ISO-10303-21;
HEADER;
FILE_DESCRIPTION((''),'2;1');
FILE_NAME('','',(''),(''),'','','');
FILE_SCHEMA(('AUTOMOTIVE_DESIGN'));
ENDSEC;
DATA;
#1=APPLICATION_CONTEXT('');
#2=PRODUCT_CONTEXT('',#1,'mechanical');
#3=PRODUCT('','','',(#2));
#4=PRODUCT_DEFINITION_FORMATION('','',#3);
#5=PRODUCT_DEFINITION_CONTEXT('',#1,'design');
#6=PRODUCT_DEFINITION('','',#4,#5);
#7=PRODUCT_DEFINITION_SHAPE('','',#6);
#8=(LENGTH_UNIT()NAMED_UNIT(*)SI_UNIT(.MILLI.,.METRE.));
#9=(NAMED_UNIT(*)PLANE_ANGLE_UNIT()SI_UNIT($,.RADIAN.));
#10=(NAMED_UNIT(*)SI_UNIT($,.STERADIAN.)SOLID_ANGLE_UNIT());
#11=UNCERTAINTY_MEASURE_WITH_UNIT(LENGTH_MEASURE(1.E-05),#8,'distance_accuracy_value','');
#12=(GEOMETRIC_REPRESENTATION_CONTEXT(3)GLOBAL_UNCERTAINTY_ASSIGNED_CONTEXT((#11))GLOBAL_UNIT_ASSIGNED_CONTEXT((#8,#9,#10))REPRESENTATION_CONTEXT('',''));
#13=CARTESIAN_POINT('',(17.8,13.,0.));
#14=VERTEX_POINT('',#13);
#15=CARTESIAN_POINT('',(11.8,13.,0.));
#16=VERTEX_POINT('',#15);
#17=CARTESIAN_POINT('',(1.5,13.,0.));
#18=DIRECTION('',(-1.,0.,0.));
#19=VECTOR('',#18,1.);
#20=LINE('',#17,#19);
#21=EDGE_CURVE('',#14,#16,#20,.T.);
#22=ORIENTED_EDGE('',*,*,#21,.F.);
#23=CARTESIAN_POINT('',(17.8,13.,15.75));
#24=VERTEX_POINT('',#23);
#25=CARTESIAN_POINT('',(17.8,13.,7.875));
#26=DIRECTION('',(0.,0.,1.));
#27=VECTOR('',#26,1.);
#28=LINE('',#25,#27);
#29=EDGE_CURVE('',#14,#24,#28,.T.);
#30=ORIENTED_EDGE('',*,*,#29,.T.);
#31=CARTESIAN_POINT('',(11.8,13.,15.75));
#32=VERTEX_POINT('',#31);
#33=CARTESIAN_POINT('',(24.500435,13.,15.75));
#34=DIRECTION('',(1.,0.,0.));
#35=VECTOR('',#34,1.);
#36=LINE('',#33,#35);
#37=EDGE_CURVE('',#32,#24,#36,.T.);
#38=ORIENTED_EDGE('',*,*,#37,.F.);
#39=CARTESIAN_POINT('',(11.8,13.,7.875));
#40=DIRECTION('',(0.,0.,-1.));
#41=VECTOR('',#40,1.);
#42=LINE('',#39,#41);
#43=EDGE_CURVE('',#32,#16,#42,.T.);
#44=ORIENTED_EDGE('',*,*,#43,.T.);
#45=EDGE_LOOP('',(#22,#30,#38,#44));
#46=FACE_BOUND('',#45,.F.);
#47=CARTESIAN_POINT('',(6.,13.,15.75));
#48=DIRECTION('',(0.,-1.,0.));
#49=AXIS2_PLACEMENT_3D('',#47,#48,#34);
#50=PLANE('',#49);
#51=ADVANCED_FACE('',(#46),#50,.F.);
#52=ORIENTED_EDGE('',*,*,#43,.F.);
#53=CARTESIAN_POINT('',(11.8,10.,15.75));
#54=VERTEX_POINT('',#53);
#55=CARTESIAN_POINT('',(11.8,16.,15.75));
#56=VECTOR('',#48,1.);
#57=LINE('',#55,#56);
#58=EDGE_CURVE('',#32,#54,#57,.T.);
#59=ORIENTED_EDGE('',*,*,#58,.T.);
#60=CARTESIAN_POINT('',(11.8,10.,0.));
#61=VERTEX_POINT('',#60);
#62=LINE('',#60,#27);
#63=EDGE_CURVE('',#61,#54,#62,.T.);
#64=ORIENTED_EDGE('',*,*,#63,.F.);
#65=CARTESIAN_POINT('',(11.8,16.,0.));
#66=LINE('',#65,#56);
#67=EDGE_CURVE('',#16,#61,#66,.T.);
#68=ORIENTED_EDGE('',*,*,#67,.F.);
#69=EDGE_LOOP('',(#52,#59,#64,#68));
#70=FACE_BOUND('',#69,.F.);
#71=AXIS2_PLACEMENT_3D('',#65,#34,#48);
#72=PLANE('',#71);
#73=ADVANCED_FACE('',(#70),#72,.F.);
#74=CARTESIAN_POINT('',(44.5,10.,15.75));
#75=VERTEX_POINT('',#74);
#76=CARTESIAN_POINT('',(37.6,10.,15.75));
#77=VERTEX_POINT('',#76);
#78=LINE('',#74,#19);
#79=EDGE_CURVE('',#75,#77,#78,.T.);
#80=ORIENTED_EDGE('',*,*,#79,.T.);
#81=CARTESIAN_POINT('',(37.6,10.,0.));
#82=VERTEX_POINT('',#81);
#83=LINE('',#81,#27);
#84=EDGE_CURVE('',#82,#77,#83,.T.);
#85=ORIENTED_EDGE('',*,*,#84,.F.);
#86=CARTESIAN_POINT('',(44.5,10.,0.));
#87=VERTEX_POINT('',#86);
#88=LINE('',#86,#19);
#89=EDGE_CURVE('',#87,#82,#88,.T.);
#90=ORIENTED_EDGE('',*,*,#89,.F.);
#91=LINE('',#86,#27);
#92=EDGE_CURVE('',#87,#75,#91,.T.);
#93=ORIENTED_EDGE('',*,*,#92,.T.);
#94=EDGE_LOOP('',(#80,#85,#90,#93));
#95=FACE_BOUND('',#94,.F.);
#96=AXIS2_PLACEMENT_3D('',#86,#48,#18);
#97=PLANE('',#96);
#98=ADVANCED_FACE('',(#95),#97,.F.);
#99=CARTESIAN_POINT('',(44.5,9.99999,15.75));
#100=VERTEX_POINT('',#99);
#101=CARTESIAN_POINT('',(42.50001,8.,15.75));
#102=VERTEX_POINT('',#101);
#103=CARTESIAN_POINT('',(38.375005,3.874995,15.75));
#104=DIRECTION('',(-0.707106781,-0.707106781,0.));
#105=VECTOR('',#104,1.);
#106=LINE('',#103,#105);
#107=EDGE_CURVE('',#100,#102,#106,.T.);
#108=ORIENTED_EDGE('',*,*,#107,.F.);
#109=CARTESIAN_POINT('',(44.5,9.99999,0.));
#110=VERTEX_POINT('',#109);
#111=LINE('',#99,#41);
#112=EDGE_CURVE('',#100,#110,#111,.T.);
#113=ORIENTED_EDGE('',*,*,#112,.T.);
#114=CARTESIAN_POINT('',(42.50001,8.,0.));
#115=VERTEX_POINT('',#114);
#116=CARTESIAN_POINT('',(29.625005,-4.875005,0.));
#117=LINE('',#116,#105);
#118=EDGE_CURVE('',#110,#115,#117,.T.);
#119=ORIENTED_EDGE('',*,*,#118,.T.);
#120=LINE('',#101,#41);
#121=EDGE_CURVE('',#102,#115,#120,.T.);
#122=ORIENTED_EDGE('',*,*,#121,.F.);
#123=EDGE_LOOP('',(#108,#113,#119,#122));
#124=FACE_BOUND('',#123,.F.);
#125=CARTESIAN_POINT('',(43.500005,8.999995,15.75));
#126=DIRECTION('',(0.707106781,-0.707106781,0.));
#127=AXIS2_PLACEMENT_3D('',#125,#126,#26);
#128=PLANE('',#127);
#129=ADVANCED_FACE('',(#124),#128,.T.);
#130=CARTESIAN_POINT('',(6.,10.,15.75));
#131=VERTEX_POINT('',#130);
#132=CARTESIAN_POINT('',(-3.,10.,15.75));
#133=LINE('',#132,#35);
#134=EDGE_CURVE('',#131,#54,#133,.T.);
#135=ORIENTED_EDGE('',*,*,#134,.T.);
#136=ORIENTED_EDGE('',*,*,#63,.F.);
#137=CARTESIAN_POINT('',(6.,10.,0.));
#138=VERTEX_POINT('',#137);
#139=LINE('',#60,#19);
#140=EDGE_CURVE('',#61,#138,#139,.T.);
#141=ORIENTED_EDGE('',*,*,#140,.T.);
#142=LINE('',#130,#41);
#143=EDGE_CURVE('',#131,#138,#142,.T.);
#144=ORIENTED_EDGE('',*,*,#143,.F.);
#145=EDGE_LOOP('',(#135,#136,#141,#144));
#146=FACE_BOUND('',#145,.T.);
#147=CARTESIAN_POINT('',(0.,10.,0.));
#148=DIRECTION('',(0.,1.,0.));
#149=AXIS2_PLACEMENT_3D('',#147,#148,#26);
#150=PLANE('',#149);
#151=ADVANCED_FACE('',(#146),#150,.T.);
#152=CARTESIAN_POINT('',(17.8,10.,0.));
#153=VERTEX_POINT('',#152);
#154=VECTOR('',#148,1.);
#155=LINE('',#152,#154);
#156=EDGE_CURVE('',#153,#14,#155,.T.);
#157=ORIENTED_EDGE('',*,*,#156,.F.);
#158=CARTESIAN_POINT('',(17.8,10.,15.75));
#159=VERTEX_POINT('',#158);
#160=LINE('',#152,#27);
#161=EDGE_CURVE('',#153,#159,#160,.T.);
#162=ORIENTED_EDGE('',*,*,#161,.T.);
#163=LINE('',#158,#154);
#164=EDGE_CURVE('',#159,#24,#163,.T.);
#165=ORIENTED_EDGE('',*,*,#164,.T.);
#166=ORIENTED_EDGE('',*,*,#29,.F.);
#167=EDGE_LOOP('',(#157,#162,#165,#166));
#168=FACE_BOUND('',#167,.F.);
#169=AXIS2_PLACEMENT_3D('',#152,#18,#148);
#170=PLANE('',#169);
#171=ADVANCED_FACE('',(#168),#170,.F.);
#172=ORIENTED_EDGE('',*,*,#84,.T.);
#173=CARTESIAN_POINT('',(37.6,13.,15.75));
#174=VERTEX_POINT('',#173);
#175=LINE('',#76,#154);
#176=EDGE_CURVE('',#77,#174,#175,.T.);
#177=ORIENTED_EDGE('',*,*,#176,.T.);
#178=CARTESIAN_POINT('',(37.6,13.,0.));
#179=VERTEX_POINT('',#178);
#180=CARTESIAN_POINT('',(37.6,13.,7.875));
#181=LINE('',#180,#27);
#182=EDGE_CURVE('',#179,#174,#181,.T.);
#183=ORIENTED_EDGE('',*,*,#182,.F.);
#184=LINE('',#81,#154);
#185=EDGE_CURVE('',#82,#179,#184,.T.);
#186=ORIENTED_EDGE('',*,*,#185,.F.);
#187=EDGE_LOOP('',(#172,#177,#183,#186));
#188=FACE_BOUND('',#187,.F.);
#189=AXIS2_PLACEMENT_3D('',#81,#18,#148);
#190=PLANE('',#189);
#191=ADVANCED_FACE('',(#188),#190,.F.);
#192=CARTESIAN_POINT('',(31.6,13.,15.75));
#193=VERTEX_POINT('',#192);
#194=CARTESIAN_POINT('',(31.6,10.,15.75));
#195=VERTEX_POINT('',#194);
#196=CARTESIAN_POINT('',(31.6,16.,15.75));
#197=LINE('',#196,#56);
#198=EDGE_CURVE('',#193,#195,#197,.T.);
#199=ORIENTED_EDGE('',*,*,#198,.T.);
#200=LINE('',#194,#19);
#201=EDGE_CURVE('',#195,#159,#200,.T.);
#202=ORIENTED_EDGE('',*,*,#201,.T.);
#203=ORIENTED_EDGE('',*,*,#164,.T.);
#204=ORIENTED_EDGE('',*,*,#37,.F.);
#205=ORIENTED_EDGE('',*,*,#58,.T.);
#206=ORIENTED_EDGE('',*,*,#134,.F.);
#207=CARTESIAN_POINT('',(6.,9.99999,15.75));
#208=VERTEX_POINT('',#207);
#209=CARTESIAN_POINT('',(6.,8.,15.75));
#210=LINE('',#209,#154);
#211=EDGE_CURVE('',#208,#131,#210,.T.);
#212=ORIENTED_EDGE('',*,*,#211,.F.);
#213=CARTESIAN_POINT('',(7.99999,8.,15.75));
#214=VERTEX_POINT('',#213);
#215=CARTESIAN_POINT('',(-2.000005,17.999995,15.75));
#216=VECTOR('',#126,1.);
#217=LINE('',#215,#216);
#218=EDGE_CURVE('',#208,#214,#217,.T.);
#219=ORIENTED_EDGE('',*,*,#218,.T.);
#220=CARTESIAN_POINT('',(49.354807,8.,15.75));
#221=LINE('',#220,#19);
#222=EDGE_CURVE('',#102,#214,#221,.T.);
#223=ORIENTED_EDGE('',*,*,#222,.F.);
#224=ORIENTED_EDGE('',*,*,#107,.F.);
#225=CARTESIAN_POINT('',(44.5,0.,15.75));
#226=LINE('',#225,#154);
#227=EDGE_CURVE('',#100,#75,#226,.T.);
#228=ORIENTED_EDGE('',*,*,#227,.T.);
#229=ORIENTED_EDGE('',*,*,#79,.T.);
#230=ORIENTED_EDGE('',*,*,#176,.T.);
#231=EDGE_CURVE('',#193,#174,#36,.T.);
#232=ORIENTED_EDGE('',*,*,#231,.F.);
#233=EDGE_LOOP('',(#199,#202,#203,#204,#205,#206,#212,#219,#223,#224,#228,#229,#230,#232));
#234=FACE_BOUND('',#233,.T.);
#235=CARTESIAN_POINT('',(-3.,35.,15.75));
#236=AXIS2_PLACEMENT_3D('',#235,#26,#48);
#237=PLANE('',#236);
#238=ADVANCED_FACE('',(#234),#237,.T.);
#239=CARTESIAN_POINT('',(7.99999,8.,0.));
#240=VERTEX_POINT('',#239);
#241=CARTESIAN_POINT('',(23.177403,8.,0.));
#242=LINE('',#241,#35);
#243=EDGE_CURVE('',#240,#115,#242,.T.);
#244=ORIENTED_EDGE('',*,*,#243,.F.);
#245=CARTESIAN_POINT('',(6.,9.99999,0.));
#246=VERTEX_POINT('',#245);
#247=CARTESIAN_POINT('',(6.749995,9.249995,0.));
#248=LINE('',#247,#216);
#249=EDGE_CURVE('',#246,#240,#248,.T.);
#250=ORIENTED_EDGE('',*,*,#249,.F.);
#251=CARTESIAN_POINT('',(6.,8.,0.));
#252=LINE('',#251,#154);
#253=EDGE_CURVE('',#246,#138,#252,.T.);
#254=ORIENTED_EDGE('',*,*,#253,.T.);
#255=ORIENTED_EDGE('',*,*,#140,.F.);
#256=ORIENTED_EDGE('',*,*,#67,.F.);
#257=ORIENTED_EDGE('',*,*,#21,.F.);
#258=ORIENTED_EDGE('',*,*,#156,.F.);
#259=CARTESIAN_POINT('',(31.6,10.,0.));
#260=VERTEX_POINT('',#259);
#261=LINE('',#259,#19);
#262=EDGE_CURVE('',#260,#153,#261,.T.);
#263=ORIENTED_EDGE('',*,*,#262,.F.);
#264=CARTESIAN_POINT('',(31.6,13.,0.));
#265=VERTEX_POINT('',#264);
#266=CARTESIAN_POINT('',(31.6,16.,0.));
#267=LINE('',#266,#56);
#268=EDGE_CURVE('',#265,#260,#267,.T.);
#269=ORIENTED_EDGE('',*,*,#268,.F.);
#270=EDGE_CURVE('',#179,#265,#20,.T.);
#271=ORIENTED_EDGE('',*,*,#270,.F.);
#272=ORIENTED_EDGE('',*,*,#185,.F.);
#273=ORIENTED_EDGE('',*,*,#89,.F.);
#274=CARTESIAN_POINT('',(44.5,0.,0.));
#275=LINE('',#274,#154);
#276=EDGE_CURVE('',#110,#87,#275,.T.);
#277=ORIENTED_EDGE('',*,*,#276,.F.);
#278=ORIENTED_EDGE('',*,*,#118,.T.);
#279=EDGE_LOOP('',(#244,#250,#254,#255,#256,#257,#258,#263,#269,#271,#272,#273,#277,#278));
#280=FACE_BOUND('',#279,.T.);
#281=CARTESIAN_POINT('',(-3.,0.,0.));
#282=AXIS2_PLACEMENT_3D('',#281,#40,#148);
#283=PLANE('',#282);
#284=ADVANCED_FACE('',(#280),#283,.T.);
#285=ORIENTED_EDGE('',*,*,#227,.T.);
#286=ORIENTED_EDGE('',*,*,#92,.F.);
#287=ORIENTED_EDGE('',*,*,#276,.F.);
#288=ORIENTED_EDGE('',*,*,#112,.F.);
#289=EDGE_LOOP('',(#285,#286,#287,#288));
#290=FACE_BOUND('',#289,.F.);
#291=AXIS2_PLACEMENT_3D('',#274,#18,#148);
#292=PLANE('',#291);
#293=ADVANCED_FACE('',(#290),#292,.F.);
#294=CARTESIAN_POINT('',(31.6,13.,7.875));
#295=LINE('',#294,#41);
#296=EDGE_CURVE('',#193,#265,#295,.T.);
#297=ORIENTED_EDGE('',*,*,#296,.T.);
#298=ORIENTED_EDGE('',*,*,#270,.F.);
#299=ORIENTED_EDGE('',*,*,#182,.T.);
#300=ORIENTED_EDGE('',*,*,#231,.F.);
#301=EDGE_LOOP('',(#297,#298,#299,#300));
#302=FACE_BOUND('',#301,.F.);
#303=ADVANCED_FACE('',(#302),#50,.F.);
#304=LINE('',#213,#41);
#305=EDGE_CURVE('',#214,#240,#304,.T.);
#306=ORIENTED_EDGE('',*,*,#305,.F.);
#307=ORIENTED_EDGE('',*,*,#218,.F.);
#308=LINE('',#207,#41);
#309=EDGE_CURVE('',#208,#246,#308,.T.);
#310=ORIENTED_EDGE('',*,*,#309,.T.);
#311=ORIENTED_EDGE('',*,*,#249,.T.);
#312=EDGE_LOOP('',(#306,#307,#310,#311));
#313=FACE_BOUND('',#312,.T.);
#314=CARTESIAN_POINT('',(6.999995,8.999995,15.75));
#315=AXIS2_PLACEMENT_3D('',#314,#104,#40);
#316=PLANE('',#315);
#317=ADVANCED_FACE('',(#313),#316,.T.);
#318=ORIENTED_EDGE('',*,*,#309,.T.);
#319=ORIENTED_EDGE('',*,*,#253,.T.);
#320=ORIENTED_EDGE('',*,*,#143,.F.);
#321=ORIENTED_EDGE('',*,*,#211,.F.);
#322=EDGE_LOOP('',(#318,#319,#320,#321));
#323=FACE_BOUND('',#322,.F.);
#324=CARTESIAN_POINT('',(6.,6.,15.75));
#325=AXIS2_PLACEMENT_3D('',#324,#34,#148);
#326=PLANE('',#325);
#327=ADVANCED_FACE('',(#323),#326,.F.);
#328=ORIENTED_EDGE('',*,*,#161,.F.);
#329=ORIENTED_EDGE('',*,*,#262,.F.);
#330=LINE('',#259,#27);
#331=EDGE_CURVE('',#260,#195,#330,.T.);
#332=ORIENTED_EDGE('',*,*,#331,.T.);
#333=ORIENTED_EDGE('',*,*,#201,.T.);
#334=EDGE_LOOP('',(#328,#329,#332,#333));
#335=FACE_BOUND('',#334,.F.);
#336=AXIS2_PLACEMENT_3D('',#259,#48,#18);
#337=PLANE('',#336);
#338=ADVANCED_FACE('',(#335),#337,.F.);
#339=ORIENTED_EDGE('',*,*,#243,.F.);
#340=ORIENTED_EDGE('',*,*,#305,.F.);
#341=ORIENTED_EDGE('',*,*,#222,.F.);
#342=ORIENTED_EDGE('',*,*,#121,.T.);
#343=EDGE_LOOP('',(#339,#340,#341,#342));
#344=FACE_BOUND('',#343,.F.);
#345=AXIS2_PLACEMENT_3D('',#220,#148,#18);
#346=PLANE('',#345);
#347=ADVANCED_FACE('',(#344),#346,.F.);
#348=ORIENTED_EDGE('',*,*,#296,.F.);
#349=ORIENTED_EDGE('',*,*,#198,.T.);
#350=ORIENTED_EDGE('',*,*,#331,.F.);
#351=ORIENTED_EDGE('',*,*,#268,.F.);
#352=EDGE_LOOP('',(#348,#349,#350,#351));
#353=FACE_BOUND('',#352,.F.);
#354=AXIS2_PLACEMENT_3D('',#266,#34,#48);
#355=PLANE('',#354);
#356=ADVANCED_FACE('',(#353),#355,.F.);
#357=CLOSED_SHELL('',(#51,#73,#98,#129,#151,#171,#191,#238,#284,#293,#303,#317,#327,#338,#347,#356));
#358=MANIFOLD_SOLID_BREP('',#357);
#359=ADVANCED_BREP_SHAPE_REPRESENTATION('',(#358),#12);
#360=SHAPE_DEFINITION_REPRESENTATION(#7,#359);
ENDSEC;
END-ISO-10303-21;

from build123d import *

# Parameters (mm, degrees)
F1_DEPTH  = 15.75
F3_D      = 4
F4_DEPTH  = 3
F5_W      = 3
F5_H      = 15.75
F6_DEPTH  = 25
F8_D      = 2
F9_W      = 6
F9_H      = 4
F10_DEPTH = 15.751
F11_SIZE  = 1
F12_SIZE  = 5
F13_DEPTH = 1
F14_DEPTH = 1
F15_W     = 0.1029567271
F15_H     = 11.4527670667
F15_W_2   = 37.000869453
F16_DEPTH = 15.751
F17_SIZE  = 1.99999


# Not quite as in the source:
# - a fillet or chamfer is up to 0.001 mm smaller than in the source, because OpenCascade refuses the exact size


with BuildPart() as f1:
    # F0 (on Top) → F1 (new body)
    with BuildSketch(Plane.XY):
        Polygon((0, 0), (44.5, 0), (44.5, 10), (37.6, 10), (37.6, 16), (31.6, 16), (31.6, 10), (17.8, 10), (17.8, 16), (11.8, 16), (11.8, 10), (0, 10), align=None)
    extrude(amount=F1_DEPTH)

    # F3 (through all)
    with Locations(Plane.XY.offset(15.75)):
        with Locations((24.7, 5)):
            Hole(F3_D / 2)

    # F4 (add): a face of the model
    f4_faces = [f1.faces().sort_by_distance(p)[0] for p in [
        (0, 5, 7.875),
    ]]
    extrude(f4_faces, amount=F4_DEPTH)

    # F5 (on face) → F6 (join)
    with BuildSketch(Plane(origin=(0, 10, 0), x_dir=(-1, 0, 0), z_dir=(0, 1, 0))):
        with Locations((1.5, 7.875)):
            Rectangle(F5_W, F5_H)
    extrude(amount=F6_DEPTH)

    # F8 (through all)
    with Locations(Plane.YZ):
        with Locations((27.25, 7.875), (17.75, 7.875)):
            Hole(F8_D / 2)

    # F9 (on face) → F10 (cut, through all)
    with BuildSketch(Plane.XY.offset(15.75)):
        with Locations((3, 8)):
            Rectangle(F9_W, F9_H)
    extrude(amount=-F10_DEPTH, mode=Mode.SUBTRACT)

    # F11
    f11_edges = [f1.edges().sort_by_distance(p)[0] for p in [
        (11.8, 16, 7.875),
        (17.8, 16, 7.875),
        (31.6, 16, 7.875),
        (37.6, 16, 7.875),
    ]]
    chamfer(f11_edges, length=F11_SIZE)

    # F12
    f12_edges = [f1.edges().sort_by_distance(p)[0] for p in [
        (44.5, 0, 7.875),
    ]]
    chamfer(f12_edges, length=F12_SIZE)

    # F13 (add): a face of the model
    f13_faces = [f1.faces().sort_by_distance(p)[0] for p in [
        (-3, 0.3838049635, 7.875),
    ]]
    extrude(f13_faces, amount=F13_DEPTH)

    # F14 (cut): a face of the model
    f14_faces = [f1.faces().sort_by_distance(p)[0] for p in [
        (0, 20.4721036707, 7.875),
    ]]
    extrude(f14_faces, amount=-F14_DEPTH, mode=Mode.SUBTRACT)

    # F15 (on face) → F16 (cut, through all)
    with BuildSketch(Plane.XY.offset(15.75)):
        with Locations((5.9485216364, 18.7263835333)):
            Rectangle(F15_W, F15_H)
        Polygon((6, 13), (5.8970432729, 13), (5.8970432729, 24.4527670667), (6, 24.4527670667), (6, 35.557191819), (-12.8509793431, 35.557191819), (-12.8509793431, -2.8801800217), (6, -2.8801800217), (6, 8), align=None)
        with Locations((24.5004347265, 18.7263835333)):
            Rectangle(F15_W_2, F15_H)
        Polygon((49.3548065424, 8), (6, 8), (6, -2.8801800217), (6, -4.4490518048), (49.3548065424, -4.4490518048), align=None)
    extrude(amount=-F16_DEPTH, mode=Mode.SUBTRACT)

    # F17 (size 2 in the source; OpenCascade refuses exactly that, so slightly less here)
    f17_edges = [f1.edges().sort_by_distance(p)[0] for p in [
        (6, 8, 7.875),
        (44.5, 8, 7.875),
    ]]
    chamfer(f17_edges, length=F17_SIZE)


solid = f1.part
